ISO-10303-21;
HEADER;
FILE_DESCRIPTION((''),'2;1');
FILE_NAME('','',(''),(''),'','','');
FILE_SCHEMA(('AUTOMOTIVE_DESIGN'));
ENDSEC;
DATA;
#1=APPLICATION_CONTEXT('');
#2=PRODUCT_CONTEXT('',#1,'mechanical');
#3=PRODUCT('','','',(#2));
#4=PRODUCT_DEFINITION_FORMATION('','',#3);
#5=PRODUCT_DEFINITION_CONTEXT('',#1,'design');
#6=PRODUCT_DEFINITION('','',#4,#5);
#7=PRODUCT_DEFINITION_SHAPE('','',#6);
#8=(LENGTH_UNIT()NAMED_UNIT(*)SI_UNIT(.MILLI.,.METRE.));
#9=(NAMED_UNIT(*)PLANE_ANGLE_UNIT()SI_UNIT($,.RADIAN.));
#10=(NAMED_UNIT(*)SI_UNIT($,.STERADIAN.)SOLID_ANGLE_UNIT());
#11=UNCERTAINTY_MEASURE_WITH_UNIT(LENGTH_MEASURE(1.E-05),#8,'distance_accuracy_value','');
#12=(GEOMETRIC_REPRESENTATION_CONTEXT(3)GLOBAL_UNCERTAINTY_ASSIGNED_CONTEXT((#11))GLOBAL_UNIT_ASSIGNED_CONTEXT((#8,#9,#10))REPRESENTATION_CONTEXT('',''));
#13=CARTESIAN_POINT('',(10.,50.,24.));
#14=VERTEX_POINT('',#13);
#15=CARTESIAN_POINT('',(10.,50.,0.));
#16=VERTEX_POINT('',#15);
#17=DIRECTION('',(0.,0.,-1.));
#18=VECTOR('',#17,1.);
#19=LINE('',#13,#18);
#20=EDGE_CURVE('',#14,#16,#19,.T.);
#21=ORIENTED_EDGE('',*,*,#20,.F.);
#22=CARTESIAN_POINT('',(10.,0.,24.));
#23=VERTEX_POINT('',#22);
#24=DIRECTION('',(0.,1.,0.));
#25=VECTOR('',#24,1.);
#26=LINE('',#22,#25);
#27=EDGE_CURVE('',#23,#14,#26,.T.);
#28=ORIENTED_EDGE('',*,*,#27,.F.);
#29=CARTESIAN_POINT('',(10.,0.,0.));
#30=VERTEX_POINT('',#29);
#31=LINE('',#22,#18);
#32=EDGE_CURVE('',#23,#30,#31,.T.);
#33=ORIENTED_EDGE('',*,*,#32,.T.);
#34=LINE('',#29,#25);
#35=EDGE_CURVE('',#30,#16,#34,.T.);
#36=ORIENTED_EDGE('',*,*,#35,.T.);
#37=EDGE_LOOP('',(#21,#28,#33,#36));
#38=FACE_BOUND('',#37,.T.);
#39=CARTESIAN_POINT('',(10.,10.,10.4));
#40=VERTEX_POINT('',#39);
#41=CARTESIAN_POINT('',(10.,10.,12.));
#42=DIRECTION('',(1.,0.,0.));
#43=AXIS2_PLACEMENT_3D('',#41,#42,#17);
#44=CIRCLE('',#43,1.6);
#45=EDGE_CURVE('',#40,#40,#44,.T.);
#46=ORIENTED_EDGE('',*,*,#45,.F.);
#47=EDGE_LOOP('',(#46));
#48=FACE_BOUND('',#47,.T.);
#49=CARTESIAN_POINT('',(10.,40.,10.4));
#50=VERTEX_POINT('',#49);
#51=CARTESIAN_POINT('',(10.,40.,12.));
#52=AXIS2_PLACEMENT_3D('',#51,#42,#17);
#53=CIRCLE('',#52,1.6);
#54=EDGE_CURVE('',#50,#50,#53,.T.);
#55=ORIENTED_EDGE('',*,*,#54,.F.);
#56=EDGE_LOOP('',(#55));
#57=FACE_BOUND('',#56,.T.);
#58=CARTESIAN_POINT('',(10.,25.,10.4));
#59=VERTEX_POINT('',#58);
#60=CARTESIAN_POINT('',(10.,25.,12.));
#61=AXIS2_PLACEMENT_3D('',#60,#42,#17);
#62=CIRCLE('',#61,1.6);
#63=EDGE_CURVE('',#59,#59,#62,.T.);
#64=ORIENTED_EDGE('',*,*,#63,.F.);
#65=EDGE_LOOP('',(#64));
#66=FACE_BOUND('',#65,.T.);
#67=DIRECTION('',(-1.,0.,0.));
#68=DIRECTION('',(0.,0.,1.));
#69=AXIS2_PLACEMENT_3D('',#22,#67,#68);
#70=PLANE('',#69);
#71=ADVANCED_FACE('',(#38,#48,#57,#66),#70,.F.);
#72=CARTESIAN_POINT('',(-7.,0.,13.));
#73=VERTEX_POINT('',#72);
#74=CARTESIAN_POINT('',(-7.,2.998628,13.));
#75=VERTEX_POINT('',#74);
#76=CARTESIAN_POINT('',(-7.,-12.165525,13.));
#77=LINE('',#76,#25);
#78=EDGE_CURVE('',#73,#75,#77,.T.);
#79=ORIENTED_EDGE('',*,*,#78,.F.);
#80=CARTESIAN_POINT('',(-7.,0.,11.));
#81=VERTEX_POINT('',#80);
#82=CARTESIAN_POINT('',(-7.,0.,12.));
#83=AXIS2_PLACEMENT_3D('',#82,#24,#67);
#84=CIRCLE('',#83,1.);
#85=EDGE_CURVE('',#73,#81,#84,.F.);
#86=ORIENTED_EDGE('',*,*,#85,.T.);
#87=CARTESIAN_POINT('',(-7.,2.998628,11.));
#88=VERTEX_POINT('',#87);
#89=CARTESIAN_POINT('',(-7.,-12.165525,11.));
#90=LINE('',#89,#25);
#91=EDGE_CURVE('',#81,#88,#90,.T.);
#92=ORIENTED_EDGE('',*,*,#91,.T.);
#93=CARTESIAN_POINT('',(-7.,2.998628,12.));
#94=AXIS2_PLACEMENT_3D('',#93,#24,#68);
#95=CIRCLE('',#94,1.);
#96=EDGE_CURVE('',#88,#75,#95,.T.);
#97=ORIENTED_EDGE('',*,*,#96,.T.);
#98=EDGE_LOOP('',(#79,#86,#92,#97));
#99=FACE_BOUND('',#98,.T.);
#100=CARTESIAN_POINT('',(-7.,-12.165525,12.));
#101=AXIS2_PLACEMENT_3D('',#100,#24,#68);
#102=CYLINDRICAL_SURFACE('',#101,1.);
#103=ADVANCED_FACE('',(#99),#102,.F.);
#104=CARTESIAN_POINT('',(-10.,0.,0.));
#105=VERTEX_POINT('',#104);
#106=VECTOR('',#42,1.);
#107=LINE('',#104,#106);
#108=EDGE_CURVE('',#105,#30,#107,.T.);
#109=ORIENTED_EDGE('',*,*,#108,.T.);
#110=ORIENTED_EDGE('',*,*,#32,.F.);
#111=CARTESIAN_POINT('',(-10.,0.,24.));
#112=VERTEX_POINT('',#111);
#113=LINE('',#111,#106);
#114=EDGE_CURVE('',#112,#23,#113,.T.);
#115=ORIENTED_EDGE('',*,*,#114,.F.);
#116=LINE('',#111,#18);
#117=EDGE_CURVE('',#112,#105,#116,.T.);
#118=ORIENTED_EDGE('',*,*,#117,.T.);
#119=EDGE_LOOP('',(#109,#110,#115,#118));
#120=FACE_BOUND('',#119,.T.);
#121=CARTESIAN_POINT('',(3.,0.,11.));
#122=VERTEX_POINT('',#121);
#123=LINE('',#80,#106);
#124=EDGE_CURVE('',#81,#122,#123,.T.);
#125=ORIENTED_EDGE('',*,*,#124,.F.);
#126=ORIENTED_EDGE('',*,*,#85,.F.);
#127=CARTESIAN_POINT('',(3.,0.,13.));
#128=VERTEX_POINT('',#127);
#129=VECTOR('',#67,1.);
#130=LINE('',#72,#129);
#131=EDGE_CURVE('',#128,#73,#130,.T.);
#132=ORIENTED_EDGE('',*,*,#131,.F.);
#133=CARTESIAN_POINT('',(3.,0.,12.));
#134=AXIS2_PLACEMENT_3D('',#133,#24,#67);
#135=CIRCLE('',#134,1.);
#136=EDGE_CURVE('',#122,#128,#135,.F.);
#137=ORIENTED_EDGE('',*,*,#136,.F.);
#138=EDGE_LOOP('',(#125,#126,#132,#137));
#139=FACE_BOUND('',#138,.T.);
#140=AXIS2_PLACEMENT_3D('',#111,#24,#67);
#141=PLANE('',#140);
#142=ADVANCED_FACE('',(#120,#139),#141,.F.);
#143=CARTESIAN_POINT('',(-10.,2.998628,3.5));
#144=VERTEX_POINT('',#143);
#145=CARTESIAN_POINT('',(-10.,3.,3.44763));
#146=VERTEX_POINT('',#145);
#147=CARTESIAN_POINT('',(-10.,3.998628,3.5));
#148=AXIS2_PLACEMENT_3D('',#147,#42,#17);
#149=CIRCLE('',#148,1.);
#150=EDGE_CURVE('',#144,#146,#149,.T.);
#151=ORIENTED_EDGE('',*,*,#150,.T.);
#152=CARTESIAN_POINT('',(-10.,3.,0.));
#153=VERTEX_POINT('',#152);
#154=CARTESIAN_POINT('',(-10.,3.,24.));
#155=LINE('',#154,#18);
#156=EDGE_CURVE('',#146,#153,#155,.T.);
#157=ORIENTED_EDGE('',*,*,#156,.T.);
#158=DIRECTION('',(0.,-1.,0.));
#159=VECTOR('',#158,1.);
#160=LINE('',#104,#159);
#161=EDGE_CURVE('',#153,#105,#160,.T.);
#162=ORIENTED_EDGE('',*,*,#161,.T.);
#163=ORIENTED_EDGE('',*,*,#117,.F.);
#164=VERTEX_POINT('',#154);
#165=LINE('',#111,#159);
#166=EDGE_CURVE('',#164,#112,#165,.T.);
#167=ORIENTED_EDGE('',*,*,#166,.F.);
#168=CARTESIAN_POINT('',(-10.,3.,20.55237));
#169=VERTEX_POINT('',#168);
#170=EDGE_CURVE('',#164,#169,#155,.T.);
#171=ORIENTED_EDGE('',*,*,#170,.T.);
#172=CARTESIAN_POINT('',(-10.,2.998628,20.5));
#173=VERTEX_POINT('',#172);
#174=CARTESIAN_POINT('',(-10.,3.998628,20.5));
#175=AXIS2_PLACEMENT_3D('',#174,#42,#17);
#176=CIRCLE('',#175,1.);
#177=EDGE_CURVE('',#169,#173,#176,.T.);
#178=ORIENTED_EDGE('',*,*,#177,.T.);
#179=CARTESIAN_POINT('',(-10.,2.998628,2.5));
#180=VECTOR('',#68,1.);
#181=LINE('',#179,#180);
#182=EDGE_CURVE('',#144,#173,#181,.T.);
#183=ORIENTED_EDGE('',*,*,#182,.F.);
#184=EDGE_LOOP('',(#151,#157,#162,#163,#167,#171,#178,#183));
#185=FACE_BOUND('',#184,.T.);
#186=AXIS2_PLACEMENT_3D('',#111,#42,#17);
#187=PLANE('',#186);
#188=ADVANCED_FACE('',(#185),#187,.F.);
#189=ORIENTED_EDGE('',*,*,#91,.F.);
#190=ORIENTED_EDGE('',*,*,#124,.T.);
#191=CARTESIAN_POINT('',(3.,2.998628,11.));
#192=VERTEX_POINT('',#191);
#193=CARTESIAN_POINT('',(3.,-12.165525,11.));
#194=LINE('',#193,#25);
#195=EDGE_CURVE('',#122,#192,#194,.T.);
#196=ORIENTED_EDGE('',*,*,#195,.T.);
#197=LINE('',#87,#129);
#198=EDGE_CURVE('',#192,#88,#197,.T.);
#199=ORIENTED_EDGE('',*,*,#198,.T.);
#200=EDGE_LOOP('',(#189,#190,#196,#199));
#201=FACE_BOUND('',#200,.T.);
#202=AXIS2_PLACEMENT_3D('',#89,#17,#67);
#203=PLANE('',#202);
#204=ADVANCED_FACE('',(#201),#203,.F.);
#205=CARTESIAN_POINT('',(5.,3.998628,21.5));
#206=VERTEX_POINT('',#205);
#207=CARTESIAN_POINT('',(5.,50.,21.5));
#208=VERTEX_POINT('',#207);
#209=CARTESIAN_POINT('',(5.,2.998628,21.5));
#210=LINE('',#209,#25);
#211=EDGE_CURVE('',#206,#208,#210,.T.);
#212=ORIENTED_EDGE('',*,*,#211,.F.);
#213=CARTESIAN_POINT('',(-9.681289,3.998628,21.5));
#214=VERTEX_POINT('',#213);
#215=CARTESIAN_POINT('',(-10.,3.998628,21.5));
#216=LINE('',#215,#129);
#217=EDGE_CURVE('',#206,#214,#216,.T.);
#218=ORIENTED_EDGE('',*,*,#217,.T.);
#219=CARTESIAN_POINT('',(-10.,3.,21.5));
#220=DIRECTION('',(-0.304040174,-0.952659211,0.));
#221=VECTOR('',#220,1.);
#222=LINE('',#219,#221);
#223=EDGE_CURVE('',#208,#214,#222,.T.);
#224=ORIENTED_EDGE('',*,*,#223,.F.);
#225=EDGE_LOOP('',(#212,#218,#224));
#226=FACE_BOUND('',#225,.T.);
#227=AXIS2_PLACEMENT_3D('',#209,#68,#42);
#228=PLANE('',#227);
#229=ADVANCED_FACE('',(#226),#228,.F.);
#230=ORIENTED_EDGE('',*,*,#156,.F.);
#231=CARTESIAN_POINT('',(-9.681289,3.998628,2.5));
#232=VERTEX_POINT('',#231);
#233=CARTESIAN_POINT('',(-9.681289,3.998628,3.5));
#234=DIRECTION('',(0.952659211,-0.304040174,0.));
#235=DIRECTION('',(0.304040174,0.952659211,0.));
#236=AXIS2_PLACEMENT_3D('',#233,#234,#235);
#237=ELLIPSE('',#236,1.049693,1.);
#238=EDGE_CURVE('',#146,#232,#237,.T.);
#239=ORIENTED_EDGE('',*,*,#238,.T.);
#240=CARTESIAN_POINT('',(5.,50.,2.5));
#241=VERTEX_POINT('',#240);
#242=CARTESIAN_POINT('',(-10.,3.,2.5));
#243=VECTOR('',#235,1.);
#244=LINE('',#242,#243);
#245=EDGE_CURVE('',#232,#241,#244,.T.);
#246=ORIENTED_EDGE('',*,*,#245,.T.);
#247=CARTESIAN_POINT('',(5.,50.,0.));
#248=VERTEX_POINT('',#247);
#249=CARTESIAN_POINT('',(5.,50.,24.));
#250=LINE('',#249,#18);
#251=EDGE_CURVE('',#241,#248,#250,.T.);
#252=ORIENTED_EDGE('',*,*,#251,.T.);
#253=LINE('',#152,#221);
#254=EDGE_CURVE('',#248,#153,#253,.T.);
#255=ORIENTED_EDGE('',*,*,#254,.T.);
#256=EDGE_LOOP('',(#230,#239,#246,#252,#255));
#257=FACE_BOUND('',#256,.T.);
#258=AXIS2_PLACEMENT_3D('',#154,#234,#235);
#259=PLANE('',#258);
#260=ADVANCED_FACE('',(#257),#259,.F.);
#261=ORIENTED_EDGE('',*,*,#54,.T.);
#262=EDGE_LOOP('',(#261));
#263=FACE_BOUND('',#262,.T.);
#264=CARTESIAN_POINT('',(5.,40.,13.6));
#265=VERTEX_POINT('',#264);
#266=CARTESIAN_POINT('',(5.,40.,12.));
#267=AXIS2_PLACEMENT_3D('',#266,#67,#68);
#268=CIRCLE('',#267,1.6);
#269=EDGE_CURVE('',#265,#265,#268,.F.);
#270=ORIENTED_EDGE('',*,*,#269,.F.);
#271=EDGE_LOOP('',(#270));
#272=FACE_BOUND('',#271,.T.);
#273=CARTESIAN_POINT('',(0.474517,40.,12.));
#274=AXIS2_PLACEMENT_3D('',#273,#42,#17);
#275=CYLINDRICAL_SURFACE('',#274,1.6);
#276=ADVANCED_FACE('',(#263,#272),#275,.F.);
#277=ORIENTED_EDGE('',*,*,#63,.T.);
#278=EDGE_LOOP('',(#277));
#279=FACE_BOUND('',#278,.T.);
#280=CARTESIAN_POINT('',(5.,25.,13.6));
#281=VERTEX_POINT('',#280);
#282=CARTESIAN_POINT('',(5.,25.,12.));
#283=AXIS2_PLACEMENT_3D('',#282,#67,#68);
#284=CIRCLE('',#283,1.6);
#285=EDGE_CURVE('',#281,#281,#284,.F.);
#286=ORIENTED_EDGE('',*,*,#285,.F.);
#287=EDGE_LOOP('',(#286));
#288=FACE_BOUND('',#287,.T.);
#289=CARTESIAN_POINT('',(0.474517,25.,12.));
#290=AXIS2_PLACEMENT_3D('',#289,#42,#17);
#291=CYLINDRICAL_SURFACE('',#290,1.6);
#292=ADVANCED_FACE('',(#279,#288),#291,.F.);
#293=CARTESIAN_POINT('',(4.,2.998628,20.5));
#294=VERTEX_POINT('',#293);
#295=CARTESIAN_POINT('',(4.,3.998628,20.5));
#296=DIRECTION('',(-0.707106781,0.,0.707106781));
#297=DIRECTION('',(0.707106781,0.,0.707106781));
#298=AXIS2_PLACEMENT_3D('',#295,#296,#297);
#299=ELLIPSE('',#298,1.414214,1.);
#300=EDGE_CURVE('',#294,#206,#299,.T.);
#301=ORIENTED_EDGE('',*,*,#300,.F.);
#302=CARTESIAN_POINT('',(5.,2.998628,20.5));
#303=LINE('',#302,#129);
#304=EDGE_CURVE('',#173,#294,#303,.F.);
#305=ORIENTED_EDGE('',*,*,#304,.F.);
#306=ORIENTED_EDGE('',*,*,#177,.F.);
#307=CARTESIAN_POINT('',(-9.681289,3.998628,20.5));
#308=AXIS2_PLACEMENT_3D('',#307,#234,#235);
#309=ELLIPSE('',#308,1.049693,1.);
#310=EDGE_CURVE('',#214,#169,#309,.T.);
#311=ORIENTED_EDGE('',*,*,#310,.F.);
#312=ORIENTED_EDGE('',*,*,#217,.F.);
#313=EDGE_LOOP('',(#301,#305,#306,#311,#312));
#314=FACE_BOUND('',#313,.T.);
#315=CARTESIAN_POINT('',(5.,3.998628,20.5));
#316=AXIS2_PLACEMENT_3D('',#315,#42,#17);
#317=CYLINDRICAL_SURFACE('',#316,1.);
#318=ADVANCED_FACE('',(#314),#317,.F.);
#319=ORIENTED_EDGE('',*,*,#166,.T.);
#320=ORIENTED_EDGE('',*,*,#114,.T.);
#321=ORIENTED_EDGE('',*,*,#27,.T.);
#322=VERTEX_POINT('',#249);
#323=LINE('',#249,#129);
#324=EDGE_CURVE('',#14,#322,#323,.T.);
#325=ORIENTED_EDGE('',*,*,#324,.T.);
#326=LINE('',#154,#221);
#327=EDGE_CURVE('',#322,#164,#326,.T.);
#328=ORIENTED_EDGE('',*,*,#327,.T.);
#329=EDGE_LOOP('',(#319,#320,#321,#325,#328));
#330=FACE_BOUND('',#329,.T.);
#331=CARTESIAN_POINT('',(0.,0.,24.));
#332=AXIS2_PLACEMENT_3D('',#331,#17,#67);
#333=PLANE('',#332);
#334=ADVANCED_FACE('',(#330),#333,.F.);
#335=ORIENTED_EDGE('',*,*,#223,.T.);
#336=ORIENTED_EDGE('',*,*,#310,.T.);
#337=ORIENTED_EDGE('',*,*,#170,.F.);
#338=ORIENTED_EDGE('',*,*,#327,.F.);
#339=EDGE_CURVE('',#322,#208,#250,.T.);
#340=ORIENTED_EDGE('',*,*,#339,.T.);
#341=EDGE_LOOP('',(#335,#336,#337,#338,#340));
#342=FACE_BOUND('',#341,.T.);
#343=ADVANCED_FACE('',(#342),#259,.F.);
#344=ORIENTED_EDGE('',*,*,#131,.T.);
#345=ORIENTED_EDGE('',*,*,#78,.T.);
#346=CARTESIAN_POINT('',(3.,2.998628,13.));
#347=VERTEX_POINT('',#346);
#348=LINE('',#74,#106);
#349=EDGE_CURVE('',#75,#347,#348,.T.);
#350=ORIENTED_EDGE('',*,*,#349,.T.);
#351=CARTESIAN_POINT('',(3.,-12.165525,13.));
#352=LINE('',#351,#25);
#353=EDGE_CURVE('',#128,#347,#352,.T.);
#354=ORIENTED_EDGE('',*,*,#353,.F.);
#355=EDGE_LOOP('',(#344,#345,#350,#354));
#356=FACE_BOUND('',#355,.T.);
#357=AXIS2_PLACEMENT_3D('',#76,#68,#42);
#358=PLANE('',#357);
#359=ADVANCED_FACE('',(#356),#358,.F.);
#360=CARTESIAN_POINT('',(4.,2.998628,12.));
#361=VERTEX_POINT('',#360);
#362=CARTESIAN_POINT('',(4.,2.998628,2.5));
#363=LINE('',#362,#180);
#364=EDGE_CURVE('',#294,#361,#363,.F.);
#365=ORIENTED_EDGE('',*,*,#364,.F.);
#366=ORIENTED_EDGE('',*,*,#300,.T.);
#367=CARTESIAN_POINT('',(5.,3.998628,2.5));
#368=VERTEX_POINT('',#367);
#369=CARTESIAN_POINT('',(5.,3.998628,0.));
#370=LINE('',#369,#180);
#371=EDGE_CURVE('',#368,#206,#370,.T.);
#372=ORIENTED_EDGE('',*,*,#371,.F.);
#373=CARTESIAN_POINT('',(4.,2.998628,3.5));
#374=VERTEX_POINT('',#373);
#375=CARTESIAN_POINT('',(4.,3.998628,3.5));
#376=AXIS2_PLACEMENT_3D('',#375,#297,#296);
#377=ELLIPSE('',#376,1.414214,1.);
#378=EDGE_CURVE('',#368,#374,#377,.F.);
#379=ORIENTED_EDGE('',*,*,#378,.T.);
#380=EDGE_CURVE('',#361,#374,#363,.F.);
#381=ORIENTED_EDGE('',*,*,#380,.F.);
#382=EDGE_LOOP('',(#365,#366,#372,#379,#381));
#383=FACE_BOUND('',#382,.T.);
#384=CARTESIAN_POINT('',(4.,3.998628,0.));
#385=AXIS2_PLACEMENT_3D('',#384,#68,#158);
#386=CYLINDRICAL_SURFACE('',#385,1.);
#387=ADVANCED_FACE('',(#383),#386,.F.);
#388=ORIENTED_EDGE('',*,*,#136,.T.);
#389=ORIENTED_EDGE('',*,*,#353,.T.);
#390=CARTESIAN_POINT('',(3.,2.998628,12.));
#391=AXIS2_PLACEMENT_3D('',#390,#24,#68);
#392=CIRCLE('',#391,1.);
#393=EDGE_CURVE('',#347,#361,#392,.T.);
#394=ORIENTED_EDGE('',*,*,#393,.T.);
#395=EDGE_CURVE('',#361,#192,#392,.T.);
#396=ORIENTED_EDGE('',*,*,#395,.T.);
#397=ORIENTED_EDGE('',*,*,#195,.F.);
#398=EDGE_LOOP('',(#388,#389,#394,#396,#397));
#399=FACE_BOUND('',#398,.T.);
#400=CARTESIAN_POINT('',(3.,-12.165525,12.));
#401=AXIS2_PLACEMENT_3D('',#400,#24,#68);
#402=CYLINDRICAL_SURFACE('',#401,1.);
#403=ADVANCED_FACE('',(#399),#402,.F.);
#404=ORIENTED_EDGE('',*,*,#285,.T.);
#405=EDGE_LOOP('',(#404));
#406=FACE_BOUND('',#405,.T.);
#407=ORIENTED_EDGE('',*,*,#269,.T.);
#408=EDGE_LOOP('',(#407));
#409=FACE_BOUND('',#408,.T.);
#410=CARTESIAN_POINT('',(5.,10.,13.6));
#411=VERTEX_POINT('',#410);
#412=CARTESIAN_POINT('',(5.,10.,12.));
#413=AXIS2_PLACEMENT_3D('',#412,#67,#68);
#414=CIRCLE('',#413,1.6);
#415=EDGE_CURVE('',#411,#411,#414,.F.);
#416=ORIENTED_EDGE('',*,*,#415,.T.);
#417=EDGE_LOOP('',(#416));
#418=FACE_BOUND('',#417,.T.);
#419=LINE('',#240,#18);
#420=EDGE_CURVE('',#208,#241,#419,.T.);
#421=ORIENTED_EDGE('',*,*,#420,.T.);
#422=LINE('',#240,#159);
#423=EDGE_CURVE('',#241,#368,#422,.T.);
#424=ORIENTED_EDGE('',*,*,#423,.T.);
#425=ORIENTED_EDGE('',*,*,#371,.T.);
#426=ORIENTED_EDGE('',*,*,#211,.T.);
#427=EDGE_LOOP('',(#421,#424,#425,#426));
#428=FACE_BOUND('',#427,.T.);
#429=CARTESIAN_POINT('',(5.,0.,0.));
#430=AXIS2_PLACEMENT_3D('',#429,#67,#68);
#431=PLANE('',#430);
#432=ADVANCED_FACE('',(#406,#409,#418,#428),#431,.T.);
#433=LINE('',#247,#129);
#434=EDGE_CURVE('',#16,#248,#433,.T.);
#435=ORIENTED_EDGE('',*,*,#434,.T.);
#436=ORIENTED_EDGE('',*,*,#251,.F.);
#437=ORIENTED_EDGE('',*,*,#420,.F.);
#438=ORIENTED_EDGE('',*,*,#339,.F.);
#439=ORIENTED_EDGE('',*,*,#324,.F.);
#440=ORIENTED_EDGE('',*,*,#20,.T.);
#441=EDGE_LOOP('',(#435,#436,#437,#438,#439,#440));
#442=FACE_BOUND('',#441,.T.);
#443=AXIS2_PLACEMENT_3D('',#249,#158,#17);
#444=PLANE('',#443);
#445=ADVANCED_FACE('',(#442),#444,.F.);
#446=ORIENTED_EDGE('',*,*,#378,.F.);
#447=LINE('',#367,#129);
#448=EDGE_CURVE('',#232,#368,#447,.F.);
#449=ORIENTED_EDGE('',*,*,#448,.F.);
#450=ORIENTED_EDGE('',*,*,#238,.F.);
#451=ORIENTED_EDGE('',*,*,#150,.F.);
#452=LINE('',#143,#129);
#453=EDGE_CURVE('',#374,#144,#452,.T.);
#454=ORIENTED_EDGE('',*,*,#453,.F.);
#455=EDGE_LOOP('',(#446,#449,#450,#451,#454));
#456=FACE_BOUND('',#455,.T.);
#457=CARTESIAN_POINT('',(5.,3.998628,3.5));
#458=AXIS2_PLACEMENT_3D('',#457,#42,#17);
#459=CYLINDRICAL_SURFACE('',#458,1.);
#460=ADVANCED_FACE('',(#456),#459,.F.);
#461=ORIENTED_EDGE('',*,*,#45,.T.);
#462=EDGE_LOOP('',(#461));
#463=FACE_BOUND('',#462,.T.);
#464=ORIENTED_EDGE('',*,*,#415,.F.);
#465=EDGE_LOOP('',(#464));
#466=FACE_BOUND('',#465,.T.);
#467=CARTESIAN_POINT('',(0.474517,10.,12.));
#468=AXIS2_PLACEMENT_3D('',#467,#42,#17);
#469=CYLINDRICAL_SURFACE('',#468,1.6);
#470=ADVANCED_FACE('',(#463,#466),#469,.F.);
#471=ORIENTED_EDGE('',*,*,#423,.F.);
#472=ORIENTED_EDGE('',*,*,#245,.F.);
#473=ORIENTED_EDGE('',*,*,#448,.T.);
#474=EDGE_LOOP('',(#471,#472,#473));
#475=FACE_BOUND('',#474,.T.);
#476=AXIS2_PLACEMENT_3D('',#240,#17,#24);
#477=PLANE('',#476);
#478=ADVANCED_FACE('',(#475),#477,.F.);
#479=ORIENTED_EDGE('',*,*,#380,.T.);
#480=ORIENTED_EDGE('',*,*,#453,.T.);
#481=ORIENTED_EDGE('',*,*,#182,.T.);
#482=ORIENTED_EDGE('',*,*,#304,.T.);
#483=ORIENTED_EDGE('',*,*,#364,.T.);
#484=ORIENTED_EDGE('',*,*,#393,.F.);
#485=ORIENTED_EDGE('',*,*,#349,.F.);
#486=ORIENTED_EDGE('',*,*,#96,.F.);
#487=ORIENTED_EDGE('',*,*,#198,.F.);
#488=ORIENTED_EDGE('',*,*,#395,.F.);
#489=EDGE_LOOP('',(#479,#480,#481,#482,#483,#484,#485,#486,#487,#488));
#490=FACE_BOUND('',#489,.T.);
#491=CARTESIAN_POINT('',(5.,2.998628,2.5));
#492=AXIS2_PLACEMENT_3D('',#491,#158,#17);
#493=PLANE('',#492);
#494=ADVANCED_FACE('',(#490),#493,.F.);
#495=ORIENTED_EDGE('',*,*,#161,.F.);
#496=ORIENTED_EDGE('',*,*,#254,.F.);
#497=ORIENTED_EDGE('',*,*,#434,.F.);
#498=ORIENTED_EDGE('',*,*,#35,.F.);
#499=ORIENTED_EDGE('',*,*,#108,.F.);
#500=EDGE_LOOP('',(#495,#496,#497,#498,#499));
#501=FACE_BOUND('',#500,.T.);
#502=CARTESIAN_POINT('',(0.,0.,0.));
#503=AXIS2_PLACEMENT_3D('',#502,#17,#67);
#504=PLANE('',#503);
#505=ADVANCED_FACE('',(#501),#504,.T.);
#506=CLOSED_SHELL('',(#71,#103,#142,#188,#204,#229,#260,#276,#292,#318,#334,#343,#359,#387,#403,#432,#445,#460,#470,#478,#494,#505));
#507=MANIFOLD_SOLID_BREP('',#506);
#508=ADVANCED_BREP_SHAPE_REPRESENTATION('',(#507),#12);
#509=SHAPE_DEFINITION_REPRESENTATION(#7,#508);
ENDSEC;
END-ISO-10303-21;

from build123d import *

# Parameters (mm, degrees)
BOSS_EXTRUDE1_DEPTH = 24
SKETCH4_W           = 19
SKETCH4_H           = 47.001372255
CUT_EXTRUDE2_DEPTH  = 15
SKETCH6_R           = 1.6
CUT_EXTRUDE4_DEPTH  = 5
CUT_EXTRUDE5_DEPTH  = 2.998627745
FILLET1_R           = 1


with BuildPart() as part:
    # Sketch1 → Boss-Extrude1 (new body)
    with BuildSketch(Plane.XY):
        Polygon((-10, 0), (10, 0), (10, 50), (5, 50), (-10, 3), align=None)
    extrude(amount=BOSS_EXTRUDE1_DEPTH)

    # Sketch4 → Cut-Extrude2 (cut)
    with BuildSketch(Plane.ZY.offset(10)):
        with Locations((12, 26.499313873)):
            Rectangle(SKETCH4_W, SKETCH4_H)
    extrude(amount=-CUT_EXTRUDE2_DEPTH, mode=Mode.SUBTRACT)

    # Sketch6 → Cut-Extrude4 (cut)
    with BuildSketch(Plane(origin=(10, 0, 0), x_dir=(0, 0, -1), z_dir=(1, 0, 0))):
        with Locations((-12, 25)):
            Circle(SKETCH6_R)
        with Locations((-12, 10)):
            Circle(SKETCH6_R)
        with Locations((-12, 40)):
            Circle(SKETCH6_R)
    extrude(amount=-CUT_EXTRUDE4_DEPTH, mode=Mode.SUBTRACT)

    # Sketch7 → Cut-Extrude5 (cut)
    with BuildSketch(Plane(origin=(0, 2.998627745, 0), x_dir=(1, 0, 0), z_dir=(0, 1, 0))):
        with BuildLine():
            Line((-7, -11), (3, -11))
            ThreePointArc((3, -11), (4, -12), (3, -13))
            Line((3, -13), (-7, -13))
            ThreePointArc((-7, -13), (-8, -12), (-7, -11))
        make_face()
    extrude(amount=-CUT_EXTRUDE5_DEPTH, mode=Mode.SUBTRACT)

    # Fillet1
    fillet1_edges = [part.edges().sort_by_distance(p)[0] for p in [
        (5, 2.998627745, 12),
        (-2.5, 2.998627745, 21.5),
        (-2.5, 2.998627745, 2.5),
    ]]
    fillet(fillet1_edges, radius=FILLET1_R - 0.0001)  # a hair under: the kernel refuses the full size


solid = part.part
